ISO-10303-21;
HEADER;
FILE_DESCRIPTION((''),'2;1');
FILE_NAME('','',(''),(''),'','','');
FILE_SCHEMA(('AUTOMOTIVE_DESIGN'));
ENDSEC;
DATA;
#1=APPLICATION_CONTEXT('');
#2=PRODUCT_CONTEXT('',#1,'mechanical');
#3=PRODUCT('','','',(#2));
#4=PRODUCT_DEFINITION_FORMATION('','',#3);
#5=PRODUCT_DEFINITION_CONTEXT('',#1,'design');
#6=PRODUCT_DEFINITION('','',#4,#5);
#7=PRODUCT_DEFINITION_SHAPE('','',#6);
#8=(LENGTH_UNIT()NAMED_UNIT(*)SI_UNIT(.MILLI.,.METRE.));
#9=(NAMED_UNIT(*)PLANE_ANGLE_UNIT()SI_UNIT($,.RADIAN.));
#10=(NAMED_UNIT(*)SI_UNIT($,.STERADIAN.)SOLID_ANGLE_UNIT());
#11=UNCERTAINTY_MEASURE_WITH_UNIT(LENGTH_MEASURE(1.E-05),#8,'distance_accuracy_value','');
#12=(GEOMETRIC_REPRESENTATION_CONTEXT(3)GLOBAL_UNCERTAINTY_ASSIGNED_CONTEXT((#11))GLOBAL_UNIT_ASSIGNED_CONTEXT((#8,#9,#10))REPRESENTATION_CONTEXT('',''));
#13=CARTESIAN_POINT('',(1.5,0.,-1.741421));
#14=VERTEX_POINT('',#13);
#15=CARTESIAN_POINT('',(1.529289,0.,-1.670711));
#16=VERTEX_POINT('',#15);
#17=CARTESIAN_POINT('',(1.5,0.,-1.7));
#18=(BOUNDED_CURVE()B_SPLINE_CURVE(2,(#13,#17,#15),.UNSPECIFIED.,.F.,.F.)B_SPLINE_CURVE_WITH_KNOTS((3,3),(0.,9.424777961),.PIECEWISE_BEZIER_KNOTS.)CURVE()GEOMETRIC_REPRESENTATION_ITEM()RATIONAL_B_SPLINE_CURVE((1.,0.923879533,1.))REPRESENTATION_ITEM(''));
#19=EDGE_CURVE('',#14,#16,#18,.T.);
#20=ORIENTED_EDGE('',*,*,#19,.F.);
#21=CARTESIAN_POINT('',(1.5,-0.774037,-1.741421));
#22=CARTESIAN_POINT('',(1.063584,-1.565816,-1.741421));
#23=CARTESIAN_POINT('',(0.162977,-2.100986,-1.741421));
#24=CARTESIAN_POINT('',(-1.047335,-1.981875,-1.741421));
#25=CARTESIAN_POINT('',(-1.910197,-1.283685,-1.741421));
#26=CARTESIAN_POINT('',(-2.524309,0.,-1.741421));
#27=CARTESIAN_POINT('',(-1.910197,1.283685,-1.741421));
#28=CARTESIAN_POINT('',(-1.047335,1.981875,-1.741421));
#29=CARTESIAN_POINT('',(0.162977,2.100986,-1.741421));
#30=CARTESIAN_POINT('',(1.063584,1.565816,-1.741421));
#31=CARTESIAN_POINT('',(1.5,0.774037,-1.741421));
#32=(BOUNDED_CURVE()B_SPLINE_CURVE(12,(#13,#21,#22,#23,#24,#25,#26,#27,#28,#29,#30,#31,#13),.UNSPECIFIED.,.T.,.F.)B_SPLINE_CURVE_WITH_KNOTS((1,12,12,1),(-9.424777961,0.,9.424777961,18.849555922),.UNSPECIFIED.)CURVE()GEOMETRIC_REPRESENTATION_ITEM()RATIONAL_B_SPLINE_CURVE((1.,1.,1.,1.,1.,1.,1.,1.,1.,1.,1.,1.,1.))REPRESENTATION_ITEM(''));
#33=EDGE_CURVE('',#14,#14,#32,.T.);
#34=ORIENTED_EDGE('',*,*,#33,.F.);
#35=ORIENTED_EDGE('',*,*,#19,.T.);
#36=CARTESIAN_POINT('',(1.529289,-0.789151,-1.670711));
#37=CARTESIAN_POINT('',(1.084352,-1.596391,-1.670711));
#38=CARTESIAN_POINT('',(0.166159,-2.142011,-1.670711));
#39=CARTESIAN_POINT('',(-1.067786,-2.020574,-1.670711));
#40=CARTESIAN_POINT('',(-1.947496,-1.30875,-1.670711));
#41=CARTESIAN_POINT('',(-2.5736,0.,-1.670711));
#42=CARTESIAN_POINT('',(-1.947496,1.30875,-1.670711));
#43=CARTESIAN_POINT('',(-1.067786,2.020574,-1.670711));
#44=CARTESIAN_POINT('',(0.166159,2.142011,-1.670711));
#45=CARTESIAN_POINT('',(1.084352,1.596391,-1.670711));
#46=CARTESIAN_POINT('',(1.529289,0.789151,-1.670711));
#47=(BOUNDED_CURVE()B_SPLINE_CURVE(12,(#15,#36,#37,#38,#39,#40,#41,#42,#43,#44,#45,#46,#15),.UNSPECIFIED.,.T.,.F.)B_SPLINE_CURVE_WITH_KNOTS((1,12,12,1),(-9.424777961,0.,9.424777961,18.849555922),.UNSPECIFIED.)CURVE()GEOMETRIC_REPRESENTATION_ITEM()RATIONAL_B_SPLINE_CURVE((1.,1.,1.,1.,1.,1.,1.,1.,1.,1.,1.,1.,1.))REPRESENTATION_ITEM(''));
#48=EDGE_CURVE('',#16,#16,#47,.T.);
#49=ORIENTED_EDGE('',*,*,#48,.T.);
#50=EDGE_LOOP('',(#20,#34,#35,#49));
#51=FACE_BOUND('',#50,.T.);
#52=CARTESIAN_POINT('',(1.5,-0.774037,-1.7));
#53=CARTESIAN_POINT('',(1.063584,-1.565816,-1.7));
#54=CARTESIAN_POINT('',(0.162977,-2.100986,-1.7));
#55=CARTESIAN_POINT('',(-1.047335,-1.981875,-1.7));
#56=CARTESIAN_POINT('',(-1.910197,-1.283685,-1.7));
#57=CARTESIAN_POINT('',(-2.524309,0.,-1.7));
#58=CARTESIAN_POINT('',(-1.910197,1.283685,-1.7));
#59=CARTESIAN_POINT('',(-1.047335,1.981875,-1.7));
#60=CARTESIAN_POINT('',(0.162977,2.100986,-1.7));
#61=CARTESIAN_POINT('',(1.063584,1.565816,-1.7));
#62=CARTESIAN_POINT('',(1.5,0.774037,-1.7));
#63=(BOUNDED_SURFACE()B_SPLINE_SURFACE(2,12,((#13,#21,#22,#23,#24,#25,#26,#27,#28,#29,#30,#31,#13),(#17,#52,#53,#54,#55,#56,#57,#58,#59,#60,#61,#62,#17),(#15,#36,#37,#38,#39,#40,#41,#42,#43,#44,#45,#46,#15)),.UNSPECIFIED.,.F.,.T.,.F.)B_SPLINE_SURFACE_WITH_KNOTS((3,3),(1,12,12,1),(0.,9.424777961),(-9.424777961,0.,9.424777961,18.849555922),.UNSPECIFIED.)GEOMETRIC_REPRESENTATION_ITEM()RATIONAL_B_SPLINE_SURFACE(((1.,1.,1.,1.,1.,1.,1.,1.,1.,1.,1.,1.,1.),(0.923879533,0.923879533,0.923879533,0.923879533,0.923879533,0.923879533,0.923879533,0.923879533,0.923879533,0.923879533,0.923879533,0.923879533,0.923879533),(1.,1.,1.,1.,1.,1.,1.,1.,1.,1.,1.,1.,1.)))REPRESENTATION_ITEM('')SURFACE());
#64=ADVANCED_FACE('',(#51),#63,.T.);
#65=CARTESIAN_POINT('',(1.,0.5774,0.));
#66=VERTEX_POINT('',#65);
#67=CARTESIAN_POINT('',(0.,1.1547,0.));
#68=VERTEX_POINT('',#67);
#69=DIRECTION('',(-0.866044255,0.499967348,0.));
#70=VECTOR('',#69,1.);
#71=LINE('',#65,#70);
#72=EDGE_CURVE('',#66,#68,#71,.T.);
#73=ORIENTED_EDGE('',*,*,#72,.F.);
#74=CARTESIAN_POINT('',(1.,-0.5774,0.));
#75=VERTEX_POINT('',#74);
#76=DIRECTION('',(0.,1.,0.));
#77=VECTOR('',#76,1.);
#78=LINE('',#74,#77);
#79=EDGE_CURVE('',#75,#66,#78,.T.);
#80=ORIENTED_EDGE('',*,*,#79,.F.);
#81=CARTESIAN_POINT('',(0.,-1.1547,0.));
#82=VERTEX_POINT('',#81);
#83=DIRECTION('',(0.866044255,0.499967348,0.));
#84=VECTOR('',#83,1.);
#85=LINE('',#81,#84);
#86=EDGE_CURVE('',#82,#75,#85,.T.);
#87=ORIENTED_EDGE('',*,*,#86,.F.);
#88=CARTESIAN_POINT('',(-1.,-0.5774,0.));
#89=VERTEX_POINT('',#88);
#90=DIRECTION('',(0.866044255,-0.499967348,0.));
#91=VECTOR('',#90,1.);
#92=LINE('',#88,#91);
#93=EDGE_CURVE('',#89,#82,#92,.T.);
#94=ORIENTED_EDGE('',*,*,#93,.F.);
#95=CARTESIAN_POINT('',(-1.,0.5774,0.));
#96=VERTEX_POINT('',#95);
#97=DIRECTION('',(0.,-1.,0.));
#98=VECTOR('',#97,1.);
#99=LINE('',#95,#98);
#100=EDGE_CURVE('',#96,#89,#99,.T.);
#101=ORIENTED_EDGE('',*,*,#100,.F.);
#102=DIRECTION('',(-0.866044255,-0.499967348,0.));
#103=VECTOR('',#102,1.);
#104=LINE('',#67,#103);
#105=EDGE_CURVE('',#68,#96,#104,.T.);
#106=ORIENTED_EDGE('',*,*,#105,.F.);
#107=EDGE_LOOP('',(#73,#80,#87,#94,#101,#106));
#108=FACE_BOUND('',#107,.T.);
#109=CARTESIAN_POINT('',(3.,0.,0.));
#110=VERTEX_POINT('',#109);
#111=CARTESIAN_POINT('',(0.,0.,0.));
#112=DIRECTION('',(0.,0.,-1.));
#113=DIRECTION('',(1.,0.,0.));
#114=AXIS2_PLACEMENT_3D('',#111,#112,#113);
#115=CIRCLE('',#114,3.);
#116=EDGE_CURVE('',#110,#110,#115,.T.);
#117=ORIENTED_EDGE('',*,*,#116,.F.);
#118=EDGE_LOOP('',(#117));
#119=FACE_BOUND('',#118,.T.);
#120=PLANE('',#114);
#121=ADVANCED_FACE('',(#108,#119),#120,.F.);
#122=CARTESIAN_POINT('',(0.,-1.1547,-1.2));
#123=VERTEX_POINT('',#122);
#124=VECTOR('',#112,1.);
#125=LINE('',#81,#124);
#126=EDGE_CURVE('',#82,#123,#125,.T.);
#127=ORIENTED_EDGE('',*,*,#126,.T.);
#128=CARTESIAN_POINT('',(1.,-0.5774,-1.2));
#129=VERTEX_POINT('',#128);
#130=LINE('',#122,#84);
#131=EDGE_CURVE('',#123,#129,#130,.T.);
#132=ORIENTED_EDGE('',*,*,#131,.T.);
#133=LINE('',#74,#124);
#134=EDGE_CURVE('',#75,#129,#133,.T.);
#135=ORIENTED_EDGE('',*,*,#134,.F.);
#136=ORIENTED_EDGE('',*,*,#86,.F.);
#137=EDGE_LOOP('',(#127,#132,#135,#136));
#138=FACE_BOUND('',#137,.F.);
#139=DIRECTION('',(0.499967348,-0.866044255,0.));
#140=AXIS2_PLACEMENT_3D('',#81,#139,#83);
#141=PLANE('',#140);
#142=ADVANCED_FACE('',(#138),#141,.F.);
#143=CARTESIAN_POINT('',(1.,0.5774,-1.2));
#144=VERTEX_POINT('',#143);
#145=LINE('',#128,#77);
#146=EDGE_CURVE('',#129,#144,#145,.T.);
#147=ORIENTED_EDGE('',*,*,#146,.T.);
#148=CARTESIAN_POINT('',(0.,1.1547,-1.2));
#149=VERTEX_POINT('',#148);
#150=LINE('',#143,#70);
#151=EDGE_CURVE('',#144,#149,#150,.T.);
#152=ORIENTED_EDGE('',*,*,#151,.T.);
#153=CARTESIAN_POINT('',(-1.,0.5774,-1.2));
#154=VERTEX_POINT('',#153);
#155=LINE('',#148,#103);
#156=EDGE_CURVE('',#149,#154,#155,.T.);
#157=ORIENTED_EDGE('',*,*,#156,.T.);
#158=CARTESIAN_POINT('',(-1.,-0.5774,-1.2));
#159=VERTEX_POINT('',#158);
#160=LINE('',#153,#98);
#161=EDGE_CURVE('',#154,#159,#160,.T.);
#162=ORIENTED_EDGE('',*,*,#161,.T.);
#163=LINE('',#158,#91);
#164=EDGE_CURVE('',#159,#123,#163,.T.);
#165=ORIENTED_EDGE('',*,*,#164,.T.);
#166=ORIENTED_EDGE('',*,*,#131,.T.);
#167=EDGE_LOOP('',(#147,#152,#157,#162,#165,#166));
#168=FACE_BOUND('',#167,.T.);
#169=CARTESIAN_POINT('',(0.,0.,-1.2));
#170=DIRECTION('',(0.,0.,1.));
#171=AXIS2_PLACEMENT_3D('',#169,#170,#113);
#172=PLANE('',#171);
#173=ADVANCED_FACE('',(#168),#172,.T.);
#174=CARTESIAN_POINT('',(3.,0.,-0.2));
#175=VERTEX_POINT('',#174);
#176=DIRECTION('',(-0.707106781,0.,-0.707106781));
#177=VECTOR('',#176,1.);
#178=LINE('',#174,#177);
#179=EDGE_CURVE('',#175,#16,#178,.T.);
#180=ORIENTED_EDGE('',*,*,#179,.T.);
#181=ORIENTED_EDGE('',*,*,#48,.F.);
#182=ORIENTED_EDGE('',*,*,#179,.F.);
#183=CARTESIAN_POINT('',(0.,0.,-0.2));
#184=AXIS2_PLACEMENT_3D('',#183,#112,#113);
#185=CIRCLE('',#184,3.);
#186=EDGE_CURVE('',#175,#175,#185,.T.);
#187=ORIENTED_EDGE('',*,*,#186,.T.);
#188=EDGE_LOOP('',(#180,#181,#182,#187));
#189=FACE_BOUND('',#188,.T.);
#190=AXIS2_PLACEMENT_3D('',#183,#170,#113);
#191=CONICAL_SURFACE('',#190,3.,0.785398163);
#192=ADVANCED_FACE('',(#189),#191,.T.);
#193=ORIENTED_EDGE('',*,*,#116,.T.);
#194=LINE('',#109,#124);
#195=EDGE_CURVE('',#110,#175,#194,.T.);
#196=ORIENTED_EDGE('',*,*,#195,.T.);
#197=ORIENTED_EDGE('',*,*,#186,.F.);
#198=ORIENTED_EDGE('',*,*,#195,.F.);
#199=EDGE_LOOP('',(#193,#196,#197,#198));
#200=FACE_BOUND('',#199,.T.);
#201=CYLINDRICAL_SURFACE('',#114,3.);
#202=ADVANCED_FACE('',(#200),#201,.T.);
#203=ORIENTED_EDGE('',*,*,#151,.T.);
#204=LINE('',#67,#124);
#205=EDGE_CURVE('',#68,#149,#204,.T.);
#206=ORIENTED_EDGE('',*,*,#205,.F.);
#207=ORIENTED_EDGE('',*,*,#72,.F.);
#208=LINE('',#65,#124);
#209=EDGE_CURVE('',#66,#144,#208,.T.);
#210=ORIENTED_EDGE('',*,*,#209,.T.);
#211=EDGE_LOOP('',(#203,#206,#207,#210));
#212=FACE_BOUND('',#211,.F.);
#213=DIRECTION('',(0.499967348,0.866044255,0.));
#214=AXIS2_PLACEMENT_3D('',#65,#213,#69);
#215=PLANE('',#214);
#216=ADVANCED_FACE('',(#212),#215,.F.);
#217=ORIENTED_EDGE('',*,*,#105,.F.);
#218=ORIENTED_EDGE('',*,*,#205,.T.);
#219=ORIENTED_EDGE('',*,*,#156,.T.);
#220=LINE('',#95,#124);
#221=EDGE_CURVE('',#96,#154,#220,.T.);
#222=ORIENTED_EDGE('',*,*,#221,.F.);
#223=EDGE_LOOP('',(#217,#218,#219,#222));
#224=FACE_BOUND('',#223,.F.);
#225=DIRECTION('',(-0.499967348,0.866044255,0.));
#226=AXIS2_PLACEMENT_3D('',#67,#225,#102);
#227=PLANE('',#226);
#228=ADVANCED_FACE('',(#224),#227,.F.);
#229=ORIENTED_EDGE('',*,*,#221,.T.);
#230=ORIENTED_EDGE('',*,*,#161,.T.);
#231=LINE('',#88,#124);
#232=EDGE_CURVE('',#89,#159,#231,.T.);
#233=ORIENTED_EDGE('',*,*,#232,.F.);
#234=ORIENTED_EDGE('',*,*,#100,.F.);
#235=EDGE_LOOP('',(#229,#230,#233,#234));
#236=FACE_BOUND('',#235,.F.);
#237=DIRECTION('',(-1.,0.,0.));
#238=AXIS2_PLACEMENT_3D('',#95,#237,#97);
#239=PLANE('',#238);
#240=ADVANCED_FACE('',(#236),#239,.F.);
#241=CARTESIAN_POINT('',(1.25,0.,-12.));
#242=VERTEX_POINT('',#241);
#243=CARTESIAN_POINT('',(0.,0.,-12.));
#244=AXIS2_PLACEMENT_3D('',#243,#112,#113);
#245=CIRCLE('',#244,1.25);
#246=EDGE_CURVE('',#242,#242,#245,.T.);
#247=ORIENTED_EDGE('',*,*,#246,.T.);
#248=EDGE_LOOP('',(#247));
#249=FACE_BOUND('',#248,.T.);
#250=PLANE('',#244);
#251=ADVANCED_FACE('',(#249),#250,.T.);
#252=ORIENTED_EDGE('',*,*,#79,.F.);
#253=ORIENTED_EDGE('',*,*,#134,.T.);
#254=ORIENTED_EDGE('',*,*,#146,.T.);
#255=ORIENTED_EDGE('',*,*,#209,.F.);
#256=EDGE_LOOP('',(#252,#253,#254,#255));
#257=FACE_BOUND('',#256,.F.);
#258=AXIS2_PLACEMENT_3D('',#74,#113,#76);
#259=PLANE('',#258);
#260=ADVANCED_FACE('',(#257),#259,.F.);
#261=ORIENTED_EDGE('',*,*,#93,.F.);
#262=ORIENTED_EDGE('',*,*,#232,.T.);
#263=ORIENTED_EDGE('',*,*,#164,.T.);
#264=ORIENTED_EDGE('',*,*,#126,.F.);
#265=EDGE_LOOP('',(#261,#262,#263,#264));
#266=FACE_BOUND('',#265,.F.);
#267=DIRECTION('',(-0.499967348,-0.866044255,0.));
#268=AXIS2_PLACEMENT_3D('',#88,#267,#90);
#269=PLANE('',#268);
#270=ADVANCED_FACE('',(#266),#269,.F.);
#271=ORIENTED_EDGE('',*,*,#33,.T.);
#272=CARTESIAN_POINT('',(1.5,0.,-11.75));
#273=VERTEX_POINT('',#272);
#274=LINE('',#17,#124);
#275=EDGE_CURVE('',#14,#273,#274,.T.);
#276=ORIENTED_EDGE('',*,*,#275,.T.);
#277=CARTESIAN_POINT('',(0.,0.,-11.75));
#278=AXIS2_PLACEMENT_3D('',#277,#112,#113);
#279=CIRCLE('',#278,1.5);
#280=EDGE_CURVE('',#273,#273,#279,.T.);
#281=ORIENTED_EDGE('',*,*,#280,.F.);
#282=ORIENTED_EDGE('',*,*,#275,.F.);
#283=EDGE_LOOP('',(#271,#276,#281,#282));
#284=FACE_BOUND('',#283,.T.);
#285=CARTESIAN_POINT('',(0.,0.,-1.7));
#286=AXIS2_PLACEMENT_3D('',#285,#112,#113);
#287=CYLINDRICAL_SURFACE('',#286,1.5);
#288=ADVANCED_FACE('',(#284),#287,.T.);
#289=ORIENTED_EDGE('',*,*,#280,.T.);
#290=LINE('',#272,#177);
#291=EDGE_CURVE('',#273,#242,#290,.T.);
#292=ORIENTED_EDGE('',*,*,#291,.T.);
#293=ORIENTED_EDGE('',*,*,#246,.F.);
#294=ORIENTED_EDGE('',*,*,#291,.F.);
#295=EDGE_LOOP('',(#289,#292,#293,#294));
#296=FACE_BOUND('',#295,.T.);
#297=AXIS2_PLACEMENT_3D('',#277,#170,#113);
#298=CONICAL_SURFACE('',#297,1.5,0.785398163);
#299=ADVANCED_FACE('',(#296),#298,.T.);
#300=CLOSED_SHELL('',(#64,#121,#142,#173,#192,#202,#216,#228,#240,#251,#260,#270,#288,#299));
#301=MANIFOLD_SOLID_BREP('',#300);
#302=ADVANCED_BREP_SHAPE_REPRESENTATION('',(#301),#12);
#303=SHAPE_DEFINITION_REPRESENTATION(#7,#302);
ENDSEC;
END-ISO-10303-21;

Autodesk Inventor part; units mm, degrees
ref_plane "YZ Plane" through (0, 0, 0) normal (1, 0, 0) x (0, 1, 0)
sketch "Sketch1" plane through (0, 0, 0) normal (0, 1, 0) x (-1, 0, 0)
  point P0 (0, 0)
sketch "Sketch2" plane through (0, 0, 0) normal (0, 1, 0) x (-1, 0, 0)
  line L0 (-1.5, -12) -> (0, -12)
  line L1 (-1.5, -1.7) -> (-1.5, -12)
  line L2 (-3, -0.2) -> (-1.5, -1.7)
  line L3 (-3, 0) -> (-3, -0.2)
  line L4 (0, 0) -> (-3, 0)
  line L5 (0, -12) -> (0, 0)
  line L6 (0, -12) -> (0, 0)
  line L7 (0, -14.4) -> (0, 2.4) projected
  line L8 (0.6, 0) -> (-3.6, 0) projected
  dimension "d3" = 3
  dimension "d5" = 1.5
  dimension "d7" = 12
  dimension "ParC" = 0.2
  dimension "d22" = 0
  dimension "d23" = 0
  dimension "d43" = 45
revolve "Revolution1" add sketch "Sketch2" angle 360 about axis through (0, 0, -12) along (0, 0, -1)
sketch "Sketch3" plane through (0, 0, 0) normal (0, 0, 1) x (1, 0, 0)
  line L0 (-1, 0.5774) -> (-1, -0.5774)
  line L1 (0, 1.1547) -> (-1, 0.5774)
  line L2 (1, 0.5774) -> (0, 1.1547)
  line L3 (1, -0.5774) -> (1, 0.5774)
  line L4 (0, -1.1547) -> (1, -0.5774)
  line L5 (-1, -0.5774) -> (0, -1.1547)
  circle A0 centre (0, 0) radius 1 construction
  circle A1 centre (0, 0) radius 1.5 construction
  dimension "d11" = 2
  dimension "d13" = 120
  dimension "d15" = 120
extrude "Extrusion1" cut sketch "Sketch3" against normal blind 1.2
fillet "Fillet1" radius 0.1 1 edges at (-1.5, 0, -1.7)
chamfer "Chamfer1" distance 0.25 angle 45 1 edges at (-1.5, 0, -12) measured on face at (1.4041, 0.5277, -8.5805)
thread "Thread1" size "M3x0.5" class "6g" standard "ISO Metric profile" length 9.3
ref_plane "MSC_PF1" through (0, 0, 0) normal (1, 0, 0) x (0, 1, 0)
ref_plane "MSC_PT1" through (0, 0, 0) normal (0, 0, -1) x (-1, 0, 0)
equation "\"d18\" = r"
equation "\"d19\" = 0.5 * PTC"
equation "\"d39\" = 0.5 * PTC"
equation "\"d3\" = 0.5 * dk"
equation "\"d5\" = 0.5 * NND"
equation "\"d7\" = NLG"
equation "\"d43\" = 0.5 * ang"
equation "\"d11\" = ParS"
equation "\"d16\" = ParT"
equation "\"NND\" = 3"
equation "\"PTC\" = 0.5"
equation "\"dk\" = 6"
equation "\"ParK\" = 1.7"
equation "\"ParS\" = 2"
equation "\"ParT\" = 1.2"
equation "\"r\" = 0.1"
equation "\"NLG\" = 12"
equation "\"ang\" = 90deg"
equation "\"THREADDIA\" = NND"
properties part number "DIN 7991 - M3x12" material "Steel, Mild"
